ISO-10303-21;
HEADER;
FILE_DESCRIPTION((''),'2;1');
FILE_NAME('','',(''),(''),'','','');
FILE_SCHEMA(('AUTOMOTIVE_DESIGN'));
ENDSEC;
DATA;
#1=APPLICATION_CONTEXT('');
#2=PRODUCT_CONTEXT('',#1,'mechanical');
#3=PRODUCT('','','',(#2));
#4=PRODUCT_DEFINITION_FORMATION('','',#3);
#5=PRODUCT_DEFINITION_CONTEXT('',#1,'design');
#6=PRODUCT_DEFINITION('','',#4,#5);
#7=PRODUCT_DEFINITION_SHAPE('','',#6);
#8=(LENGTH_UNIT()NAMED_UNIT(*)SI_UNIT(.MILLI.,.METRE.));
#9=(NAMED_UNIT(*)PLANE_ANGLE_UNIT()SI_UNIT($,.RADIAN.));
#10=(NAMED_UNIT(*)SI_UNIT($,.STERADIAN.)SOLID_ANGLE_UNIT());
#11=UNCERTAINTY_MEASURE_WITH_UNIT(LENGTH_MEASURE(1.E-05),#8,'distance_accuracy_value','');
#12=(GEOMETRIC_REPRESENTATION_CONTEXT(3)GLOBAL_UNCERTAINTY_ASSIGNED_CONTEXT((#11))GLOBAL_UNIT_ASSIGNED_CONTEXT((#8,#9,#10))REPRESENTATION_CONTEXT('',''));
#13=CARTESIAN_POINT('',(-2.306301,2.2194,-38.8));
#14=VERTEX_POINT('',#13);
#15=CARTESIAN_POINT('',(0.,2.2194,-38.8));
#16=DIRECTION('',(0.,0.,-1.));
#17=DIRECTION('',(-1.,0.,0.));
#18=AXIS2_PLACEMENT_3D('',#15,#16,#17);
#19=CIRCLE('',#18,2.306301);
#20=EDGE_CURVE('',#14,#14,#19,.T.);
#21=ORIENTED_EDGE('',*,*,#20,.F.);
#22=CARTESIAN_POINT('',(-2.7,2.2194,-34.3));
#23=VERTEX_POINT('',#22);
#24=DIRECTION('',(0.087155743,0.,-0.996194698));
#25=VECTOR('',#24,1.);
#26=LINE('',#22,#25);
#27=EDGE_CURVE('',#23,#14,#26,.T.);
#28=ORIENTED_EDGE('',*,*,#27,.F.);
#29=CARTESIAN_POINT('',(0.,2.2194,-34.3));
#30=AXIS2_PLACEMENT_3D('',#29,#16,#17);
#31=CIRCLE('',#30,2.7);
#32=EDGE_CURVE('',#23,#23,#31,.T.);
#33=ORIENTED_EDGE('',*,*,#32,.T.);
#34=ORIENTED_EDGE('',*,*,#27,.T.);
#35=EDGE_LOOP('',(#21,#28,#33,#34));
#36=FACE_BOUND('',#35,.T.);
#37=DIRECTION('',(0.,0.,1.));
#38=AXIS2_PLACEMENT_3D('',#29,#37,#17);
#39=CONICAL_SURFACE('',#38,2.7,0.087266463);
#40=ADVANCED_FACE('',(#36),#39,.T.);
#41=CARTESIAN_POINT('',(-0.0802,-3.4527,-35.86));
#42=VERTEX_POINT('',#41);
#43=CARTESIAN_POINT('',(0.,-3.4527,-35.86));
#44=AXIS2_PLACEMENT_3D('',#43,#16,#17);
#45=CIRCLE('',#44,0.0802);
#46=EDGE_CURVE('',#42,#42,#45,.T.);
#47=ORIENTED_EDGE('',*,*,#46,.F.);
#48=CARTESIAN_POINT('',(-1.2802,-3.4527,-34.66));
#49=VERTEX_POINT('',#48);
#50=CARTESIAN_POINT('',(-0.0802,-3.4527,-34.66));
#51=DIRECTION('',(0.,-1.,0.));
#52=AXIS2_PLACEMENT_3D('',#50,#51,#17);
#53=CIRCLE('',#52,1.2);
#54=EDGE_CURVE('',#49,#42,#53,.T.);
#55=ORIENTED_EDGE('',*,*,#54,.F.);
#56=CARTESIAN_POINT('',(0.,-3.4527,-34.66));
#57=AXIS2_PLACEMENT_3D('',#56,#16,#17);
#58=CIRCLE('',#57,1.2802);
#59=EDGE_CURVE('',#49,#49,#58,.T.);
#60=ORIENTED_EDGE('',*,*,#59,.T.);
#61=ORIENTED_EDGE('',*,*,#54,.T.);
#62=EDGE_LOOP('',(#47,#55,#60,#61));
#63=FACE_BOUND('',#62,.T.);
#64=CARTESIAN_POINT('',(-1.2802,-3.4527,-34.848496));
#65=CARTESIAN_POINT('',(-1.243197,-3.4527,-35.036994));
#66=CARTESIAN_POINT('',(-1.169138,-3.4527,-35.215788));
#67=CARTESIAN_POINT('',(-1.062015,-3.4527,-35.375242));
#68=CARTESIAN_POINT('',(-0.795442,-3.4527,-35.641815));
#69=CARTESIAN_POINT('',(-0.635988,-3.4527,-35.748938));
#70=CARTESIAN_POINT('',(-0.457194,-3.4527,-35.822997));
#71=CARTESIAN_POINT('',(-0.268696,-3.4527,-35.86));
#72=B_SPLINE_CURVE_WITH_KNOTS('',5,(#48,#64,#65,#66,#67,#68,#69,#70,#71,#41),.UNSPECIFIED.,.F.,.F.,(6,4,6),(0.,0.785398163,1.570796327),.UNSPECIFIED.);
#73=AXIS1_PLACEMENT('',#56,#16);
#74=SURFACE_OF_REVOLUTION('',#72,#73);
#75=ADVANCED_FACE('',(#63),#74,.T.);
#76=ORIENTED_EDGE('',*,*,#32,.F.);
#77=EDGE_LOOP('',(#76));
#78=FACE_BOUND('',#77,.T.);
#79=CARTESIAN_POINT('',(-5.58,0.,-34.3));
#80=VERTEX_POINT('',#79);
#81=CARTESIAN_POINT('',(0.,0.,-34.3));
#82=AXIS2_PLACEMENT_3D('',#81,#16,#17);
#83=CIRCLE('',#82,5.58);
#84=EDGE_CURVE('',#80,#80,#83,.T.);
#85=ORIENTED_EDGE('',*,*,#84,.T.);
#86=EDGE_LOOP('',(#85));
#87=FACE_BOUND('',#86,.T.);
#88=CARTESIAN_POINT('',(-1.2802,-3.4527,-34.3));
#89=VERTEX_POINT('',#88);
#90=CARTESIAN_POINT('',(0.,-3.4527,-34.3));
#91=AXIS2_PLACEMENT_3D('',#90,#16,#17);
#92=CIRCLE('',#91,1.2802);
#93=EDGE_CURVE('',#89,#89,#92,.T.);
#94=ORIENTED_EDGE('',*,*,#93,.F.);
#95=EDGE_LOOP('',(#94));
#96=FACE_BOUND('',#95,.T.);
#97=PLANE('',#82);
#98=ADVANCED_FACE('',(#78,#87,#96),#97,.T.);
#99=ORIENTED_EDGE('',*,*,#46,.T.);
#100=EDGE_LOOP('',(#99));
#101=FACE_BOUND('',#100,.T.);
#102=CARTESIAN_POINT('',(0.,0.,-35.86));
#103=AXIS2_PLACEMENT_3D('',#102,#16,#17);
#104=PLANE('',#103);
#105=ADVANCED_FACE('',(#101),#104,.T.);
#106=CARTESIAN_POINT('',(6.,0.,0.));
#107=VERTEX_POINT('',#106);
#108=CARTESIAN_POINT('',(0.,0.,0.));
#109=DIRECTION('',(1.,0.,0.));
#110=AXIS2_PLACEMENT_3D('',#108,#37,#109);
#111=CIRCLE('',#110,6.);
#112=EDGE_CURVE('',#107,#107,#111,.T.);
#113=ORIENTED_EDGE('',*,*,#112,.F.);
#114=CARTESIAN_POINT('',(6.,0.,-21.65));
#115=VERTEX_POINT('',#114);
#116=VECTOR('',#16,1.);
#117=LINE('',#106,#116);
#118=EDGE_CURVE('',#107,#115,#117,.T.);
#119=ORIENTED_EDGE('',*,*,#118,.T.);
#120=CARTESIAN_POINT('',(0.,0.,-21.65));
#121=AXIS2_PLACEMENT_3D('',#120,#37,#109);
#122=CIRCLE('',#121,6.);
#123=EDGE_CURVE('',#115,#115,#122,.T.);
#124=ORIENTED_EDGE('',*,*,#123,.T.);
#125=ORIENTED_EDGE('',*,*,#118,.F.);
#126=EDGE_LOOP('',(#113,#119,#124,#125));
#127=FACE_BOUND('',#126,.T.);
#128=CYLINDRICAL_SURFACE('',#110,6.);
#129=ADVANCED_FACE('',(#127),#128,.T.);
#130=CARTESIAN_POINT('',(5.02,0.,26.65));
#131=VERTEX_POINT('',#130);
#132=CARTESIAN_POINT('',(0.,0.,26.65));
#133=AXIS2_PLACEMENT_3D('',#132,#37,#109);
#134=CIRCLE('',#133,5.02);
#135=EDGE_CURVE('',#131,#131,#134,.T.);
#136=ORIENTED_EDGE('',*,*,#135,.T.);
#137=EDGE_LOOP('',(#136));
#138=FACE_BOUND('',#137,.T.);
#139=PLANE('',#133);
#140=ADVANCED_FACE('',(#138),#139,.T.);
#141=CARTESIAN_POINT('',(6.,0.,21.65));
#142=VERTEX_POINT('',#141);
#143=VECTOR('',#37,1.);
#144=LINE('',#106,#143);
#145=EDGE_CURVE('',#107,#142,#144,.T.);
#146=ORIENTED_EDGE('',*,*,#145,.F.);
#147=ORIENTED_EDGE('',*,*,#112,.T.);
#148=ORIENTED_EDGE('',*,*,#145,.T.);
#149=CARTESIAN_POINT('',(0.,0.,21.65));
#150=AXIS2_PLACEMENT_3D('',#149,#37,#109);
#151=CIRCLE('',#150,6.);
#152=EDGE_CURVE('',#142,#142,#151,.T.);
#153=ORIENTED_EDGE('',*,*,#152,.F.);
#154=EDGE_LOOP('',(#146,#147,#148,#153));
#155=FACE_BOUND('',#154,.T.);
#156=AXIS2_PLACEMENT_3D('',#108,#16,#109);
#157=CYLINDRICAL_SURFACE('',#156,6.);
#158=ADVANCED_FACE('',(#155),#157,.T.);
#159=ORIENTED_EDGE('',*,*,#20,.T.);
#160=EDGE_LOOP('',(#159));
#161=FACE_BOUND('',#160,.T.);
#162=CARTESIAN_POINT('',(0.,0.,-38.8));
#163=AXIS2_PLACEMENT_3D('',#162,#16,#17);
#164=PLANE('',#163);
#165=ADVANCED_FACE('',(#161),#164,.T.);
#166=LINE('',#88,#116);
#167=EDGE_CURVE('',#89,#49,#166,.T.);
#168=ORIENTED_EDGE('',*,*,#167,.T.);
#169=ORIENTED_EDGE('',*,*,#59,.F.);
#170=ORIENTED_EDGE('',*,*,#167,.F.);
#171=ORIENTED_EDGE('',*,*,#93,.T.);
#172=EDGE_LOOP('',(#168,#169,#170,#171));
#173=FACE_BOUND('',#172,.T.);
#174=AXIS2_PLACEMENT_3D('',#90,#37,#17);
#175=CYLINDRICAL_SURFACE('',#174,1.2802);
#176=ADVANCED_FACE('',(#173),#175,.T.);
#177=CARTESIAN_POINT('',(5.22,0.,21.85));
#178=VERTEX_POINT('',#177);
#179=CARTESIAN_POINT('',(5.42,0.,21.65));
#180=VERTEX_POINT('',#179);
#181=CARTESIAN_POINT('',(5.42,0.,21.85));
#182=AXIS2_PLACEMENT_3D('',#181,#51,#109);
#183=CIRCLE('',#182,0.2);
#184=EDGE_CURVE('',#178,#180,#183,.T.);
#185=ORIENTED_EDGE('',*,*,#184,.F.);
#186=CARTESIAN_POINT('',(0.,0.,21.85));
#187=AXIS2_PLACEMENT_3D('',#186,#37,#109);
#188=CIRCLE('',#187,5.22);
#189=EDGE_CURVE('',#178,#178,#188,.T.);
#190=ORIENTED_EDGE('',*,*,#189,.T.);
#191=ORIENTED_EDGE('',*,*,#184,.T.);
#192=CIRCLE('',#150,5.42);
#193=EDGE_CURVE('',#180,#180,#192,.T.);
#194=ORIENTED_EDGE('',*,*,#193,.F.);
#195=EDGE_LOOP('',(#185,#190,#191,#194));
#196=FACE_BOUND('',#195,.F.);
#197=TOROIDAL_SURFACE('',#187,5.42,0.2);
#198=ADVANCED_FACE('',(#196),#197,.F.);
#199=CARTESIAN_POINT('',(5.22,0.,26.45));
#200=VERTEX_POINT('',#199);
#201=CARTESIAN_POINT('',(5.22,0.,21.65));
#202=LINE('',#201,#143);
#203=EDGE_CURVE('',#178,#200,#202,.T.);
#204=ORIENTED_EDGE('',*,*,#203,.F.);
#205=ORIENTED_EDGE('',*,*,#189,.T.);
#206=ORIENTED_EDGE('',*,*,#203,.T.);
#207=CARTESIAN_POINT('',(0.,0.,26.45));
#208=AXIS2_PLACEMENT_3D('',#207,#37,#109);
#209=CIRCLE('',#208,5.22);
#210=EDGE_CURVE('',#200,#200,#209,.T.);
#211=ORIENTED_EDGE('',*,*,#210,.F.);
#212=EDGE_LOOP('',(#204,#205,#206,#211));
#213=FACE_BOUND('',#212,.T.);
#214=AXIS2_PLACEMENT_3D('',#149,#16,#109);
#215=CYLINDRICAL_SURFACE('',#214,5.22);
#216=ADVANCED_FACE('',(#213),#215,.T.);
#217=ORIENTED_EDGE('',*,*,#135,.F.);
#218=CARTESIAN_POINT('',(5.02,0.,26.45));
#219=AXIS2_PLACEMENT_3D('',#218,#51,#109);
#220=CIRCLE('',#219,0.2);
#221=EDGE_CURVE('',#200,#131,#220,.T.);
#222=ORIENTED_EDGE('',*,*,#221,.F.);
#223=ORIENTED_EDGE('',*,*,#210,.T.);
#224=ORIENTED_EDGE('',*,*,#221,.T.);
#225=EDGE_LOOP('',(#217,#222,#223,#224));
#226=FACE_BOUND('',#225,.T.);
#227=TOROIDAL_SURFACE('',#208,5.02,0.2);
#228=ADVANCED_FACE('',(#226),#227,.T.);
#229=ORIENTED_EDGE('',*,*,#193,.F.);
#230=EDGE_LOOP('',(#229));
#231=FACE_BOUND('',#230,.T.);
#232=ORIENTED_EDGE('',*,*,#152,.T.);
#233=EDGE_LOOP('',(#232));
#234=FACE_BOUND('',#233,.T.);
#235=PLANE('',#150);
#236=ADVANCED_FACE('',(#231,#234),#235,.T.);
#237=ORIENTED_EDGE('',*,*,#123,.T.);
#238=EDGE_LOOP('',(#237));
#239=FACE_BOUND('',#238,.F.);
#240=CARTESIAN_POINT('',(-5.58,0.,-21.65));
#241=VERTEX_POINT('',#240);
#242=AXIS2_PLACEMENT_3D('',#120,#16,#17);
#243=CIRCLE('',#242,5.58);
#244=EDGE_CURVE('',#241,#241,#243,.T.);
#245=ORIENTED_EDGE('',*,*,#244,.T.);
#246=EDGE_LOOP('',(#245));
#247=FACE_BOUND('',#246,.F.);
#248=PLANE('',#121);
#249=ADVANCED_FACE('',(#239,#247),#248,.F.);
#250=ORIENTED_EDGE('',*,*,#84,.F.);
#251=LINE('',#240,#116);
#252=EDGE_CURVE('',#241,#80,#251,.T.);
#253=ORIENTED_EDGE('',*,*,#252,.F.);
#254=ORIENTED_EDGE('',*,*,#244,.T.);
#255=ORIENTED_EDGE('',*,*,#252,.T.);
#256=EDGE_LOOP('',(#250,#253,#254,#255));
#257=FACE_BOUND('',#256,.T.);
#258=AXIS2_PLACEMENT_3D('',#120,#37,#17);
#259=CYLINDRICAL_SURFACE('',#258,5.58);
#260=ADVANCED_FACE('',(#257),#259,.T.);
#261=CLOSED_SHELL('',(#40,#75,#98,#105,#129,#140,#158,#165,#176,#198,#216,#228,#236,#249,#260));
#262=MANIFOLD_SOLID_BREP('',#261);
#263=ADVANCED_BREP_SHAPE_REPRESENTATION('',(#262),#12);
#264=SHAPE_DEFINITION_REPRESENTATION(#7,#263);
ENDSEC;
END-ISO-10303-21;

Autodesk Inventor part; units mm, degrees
ref_plane "YZ Plane" through (0, 0, 0) normal (1, 0, 0) x (0, 1, 0)
ref_plane "XZ Plane" through (0, 0, 0) normal (0, 1, 0) x (-1, 0, 0)
ref_plane "XY Plane" through (0, 0, 0) normal (0, 0, 1) x (1, 0, 0)
sketch "Sketch1" plane through (0, 0, 0) normal (0, 0, 1) x (1, 0, 0)
  circle A0 centre (0, 0) radius 6
  dimension "d0" = 12
extrude "Extrusion1" add sketch "Sketch1" along normal mid plane 43.3
thread "Thread1" size "M12x1.75" class "6g" standard "ISO Metric profile" full length
sketch "Sketch2" plane through (0, 0, 21.65) normal (0, 0, 1) x (1, 0, 0)
  circle A0 centre (0, 0) radius 5.22
  dimension "d5" = 10.44
extrude "Extrusion2" add sketch "Sketch2" along normal blind 5
fillet "Fillet1" radius 0.2 1 edges at (-5.22, 0, 26.65)
fillet "Fillet2" radius 0.2 1 edges at (-5.22, 0, 21.65)
sketch "Sketch3" plane through (0, 0, -21.65) normal (0, 0, -1) x (-1, 0, 0)
  circle A0 centre (0, 0) radius 5.58
  dimension "d10" = 11.16
extrude "Extrusion3" add sketch "Sketch3" along normal blind 12.65
sketch "Sketch4" plane through (0, 0, -34.3) normal (0, 0, -1) x (-1, 0, 0)
  circle A0 centre (0, 2.2194) radius 2.7
  point P0 (0, 0)
  dimension "d13" = 5.4
extrude "Extrusion4" add sketch "Sketch4" along normal blind 4.5
draft "FaceDraft1" angle 5 pull direction (0, 0, -1) faces at (-2.6912, 2.0021, -37.3) fixed edges at (2.7, 2.2194, -34.3)
sketch "Sketch5" plane through (0, 0, -34.3) normal (0, 0, -1) x (-1, 0, 0)
  circle A0 centre (0, -3.4527) radius 1.2802
  point P0 (0, 0)
extrude "Extrusion5" add sketch "Sketch5" along normal blind 1.56
fillet "Fillet3" radius 1.2 1 edges at (1.2802, -3.4527, -35.86)
properties part number "LJ12A3-4-z-BY inductive switch"
